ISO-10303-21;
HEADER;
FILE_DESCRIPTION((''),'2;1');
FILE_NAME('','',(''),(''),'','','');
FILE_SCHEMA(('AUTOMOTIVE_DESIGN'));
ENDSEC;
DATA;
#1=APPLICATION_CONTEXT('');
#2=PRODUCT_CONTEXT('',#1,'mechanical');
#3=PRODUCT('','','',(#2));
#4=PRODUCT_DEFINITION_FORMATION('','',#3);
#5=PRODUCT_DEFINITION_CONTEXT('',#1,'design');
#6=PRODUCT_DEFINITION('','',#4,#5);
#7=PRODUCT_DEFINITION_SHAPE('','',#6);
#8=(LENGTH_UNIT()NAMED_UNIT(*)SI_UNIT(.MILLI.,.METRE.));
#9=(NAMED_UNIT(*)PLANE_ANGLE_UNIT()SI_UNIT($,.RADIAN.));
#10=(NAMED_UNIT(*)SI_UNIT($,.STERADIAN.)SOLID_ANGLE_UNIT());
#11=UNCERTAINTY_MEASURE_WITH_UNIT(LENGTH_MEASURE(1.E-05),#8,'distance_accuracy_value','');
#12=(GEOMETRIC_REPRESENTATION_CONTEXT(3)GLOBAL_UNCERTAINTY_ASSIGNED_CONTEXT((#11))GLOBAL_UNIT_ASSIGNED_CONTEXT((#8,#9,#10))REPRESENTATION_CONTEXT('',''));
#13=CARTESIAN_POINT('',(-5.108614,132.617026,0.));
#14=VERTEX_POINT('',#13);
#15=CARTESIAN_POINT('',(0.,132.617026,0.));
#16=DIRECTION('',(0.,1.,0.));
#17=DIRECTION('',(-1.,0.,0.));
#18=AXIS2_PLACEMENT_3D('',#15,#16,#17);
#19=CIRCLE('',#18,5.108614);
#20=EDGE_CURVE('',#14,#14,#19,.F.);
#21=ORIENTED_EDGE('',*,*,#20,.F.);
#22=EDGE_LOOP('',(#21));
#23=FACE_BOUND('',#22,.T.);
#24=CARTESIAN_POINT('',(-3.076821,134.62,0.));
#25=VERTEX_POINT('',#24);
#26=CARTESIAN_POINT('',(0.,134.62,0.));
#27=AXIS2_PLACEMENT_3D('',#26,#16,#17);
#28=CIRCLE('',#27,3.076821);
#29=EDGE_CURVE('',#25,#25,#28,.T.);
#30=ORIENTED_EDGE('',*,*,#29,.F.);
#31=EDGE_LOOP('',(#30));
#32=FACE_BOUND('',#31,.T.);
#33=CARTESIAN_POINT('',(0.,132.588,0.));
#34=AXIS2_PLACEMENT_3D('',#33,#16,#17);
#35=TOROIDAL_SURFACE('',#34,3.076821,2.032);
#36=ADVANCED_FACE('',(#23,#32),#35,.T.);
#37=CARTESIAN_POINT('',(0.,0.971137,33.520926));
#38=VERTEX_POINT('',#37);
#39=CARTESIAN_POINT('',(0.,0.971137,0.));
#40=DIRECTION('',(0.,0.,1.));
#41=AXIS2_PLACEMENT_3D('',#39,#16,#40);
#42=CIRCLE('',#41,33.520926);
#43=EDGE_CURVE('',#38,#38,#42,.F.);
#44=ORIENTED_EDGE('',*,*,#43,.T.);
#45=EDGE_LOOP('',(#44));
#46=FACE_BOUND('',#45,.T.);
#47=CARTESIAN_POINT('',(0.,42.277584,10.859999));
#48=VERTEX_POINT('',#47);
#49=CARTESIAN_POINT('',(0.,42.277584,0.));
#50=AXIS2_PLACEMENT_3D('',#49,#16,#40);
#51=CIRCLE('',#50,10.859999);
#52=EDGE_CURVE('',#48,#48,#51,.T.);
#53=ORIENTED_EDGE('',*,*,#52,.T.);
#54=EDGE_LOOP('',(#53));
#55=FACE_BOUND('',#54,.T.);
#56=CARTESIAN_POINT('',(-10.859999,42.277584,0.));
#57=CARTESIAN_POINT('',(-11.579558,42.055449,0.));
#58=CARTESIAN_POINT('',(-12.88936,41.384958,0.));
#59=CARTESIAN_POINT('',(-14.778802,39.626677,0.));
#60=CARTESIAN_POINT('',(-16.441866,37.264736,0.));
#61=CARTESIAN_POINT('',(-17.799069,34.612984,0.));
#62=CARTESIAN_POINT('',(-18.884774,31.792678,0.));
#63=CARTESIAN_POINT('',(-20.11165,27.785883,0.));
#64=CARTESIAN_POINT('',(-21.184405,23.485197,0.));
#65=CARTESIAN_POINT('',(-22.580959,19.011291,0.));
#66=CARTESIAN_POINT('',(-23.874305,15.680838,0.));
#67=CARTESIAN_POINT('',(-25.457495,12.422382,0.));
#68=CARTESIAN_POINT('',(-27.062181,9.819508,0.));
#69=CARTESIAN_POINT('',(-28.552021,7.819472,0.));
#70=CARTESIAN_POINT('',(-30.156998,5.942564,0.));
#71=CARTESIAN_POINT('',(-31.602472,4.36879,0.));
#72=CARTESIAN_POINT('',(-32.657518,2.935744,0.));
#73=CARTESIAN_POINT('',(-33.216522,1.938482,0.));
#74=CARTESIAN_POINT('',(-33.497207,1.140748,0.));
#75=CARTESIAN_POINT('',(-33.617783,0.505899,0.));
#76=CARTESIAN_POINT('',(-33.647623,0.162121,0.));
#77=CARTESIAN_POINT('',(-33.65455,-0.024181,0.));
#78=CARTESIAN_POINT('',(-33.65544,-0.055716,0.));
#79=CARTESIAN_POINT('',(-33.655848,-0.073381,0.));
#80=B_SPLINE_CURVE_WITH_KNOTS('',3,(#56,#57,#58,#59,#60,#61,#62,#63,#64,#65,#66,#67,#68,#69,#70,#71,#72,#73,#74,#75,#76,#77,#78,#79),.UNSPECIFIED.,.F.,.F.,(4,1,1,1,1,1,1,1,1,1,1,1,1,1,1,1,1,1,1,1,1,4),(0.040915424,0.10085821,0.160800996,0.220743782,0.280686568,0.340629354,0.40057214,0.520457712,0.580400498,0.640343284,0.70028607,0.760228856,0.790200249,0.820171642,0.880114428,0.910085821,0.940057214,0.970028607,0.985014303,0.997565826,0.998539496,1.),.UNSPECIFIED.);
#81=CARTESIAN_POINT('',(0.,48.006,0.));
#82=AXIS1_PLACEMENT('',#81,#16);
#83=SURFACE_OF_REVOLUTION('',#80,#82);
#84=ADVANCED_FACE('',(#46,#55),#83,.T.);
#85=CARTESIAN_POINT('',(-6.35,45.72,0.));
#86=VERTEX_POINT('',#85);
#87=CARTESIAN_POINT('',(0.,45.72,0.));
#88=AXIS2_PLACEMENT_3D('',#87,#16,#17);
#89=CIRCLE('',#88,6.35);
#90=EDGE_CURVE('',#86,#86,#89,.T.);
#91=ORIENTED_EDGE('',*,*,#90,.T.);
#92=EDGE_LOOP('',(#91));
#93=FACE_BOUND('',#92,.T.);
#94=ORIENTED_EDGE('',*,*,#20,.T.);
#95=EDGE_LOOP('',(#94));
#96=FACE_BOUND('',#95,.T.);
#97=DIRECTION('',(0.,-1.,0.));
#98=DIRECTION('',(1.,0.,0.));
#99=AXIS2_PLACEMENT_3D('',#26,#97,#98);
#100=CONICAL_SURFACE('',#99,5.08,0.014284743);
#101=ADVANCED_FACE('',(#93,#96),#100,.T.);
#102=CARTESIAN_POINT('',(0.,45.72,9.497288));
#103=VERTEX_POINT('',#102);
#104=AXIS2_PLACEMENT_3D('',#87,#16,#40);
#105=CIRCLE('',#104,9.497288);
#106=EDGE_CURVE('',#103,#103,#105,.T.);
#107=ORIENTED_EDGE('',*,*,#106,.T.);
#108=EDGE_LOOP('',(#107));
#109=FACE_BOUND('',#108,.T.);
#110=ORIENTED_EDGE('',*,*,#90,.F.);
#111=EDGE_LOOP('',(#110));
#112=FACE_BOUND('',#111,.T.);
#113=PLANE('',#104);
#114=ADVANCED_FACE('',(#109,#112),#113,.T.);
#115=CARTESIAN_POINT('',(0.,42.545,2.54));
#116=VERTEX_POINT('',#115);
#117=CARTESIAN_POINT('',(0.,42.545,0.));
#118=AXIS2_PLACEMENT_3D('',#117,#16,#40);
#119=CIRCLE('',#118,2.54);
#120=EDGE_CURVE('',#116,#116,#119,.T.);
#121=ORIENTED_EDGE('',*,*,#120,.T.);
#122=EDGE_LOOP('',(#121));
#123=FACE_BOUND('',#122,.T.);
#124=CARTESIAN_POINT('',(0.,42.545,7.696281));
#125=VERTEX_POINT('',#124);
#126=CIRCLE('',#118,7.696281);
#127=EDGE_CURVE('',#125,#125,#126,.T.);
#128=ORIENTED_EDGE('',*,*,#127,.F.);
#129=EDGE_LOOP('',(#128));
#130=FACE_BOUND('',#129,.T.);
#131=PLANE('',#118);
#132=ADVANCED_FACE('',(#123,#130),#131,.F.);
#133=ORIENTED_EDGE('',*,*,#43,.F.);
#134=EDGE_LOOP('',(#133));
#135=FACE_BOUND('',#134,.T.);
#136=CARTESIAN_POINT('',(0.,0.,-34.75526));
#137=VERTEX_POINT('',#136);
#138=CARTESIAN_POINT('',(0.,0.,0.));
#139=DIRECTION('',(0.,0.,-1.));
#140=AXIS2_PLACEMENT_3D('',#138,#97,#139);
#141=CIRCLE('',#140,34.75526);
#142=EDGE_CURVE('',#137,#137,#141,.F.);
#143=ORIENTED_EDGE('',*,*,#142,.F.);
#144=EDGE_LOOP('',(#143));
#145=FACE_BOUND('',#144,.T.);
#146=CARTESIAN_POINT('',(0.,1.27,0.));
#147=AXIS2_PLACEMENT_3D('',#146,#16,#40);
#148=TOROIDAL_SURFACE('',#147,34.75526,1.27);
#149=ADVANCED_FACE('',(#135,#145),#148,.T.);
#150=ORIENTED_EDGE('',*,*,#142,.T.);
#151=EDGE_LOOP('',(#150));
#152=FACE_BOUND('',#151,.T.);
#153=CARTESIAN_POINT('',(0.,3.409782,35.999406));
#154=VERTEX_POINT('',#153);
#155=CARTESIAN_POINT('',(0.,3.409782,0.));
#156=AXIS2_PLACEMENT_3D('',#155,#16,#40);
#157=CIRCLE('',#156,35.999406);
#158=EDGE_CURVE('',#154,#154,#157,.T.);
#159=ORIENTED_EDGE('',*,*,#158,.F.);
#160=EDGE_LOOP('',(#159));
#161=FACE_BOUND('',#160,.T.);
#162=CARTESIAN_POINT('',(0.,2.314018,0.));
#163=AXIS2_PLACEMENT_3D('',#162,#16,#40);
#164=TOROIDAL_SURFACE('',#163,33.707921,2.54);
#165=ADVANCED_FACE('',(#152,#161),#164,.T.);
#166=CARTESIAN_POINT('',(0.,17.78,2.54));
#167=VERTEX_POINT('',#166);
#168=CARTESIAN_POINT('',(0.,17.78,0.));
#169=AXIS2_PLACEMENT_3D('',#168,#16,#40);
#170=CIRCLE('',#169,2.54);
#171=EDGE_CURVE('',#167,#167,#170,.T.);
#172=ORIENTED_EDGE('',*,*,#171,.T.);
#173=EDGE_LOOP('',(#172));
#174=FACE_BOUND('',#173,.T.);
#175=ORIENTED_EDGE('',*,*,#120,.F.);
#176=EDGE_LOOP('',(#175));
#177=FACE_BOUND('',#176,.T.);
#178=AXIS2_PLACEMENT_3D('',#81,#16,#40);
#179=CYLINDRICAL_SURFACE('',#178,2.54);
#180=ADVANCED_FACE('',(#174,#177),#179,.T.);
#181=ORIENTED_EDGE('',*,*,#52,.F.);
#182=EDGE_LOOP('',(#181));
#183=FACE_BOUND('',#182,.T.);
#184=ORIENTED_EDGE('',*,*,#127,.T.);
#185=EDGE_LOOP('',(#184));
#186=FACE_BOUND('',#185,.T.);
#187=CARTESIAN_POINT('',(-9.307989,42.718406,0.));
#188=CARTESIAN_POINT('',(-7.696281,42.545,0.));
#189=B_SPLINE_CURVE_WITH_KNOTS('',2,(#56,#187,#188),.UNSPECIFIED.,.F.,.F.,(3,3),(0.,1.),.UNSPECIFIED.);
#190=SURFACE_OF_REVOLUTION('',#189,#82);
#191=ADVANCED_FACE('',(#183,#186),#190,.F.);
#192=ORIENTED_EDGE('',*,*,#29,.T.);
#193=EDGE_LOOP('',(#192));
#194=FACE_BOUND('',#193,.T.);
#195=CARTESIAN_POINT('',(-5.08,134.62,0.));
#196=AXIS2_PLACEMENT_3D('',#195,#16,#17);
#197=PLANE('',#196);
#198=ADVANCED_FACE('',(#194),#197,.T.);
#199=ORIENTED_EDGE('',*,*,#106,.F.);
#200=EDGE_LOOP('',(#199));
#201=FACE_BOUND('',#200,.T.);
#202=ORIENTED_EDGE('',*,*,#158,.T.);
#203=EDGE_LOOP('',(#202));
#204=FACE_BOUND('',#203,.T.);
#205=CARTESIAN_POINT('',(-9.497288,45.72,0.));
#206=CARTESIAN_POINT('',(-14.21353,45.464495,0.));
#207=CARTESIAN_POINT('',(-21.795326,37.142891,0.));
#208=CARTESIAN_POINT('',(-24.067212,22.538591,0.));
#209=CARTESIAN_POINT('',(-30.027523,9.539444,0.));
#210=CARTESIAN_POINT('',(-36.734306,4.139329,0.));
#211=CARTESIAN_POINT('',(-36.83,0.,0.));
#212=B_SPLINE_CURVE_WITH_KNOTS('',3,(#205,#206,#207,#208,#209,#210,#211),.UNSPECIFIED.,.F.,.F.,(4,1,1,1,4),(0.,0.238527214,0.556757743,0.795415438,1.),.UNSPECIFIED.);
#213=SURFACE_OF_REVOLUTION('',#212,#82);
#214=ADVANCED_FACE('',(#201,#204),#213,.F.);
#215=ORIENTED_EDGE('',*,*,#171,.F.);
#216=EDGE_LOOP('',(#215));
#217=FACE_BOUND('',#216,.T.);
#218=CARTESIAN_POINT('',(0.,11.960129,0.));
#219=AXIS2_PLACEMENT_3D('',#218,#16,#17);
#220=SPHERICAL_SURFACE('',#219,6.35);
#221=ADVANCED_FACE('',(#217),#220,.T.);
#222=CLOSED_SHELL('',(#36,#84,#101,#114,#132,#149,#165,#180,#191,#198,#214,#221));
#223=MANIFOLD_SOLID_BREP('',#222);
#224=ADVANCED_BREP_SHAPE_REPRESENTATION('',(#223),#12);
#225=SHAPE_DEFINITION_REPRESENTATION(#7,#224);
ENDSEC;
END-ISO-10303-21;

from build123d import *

# Parameters (mm, degrees)
FILLET2_R = 2.032
FILLET4_R = 1.27


with BuildPart() as part:
    # Sketch1 → Revolve3 (revolve)
    with BuildSketch(Plane.XY):
        with BuildLine():
            Line((0, 42.545), (0, 45.72))
            Line((0, 45.72), (-9.497287659, 45.72))
            add(Edge.make_bspline(
                [(-9.497287659, 45.72), (-14.213529728, 45.464495083), (-21.795325511, 37.1428909), (-24.067211816, 22.538590511), (-30.02752275, 9.539444124), (-36.734305824, 4.139328981), (-36.83, 0)],
                knots=[0, 0, 0, 0, 0.238527214, 0.556757743, 0.795415438, 1, 1, 1, 1], degree=3))
            Line((-36.83, 0), (-33.653639598, 0))
            add(Edge.make_bspline(
                [(-10.85999929, 42.277584205), (-11.579557887, 42.055449042), (-12.889359895, 41.384958345), (-14.778802224, 39.626676889), (-16.441865513, 37.264736166), (-17.79906867, 34.612984197), (-18.884774216, 31.792678406), (-20.111650288, 27.785883379), (-21.184405237, 23.485197173), (-22.580959053, 19.011290684), (-23.874304997, 15.680837948), (-25.457494611, 12.422382171), (-27.06218056, 9.819508231), (-28.552020876, 7.819472461), (-30.156998376, 5.942564016), (-31.602471782, 4.368789843), (-32.657518321, 2.935744103), (-33.216522278, 1.938481724), (-33.497206736, 1.140747737), (-33.617782772, 0.505898578), (-33.647113272, 0.167991432), (-33.653414151, 0.006074508), (-33.653639598, 0)],
                knots=[0.040915424, 0.040915424, 0.040915424, 0.040915424, 0.10085821, 0.160800996, 0.220743782, 0.280686568, 0.340629354, 0.40057214, 0.520457712, 0.580400498, 0.640343284, 0.70028607, 0.760228856, 0.790200249, 0.820171642, 0.880114428, 0.910085821, 0.940057214, 0.970028607, 0.985014303, 0.997565826, 0.998052661, 0.998052661, 0.998052661, 0.998052661], degree=3))
            add(Edge.make_bspline(
                [(-10.85999929, 42.277584205), (-9.307989135, 42.718405642), (-7.696280941, 42.545)],
                knots=[0, 0, 0, 1, 1, 1], degree=2))
            Line((-7.696280941, 42.545), (0, 42.545))
        make_face()
    revolve(axis=Axis((0, 48.006, 0), (0, -1, 0)))

    # Sketch2 → Revolve4 (revolve)
    with BuildSketch(Plane.XY):
        Polygon((0, 45.72), (-6.35, 45.72), (-5.08, 134.62), (0, 134.62), align=None)
    revolve(axis=Axis((0, 134.62, 0), (0, -1, 0)))

    # Sketch3 → Revolve5 (revolve)
    with BuildSketch(Plane.XY, mode=Mode.PRIVATE) as revolve5_sk:
        with BuildLine():
            Line((0, 45.72), (-2.54, 45.72))
            Line((-2.54, 45.72), (-2.54, 17.78))
            ThreePointArc((-2.54, 17.78), (-6.216055087, 10.66276263), (0, 5.610128867))
            Line((0, 5.610128867), (0, 17.78))
            Line((0, 17.78), (0, 45.72))
        make_face()
    revolve(revolve5_sk.sketch.rotate(Axis((0, 48.006, 0), (0, -1, 0)), 270), axis=Axis((0, 48.006, 0), (0, -1, 0)))

    # Fillet2
    fillet2_edges = [part.edges().sort_by_distance(p)[0] for p in [
        (5.08, 134.62, 0),
    ]]
    fillet(fillet2_edges, radius=FILLET2_R)

    # Fillet4
    fillet4_edges = [part.edges().sort_by_distance(p)[0] for p in [
        (33.653639598, 0, 0),
    ]]
    fillet(fillet4_edges, radius=FILLET4_R)

    # Fillet5: read off the stored shape, not the designer's step
    # Fillet5 outline → Fillet5 (revolve, cut)
    with BuildSketch(Plane.XY):
        with BuildLine():
            Line((34.755259793, 0), (36.83, 0))
            Line((36.83, 0), (36.83, 3.409782199))
            Line((36.83, 3.409782199), (35.999405724, 3.409782199))
            ThreePointArc((35.999405724, 3.409782199), (36.094045344, 1.443380248), (34.755259793, 0))
        make_face()
    revolve(axis=Axis((0, 0, 0), (0, 1, 0)), mode=Mode.SUBTRACT)


solid = part.part
